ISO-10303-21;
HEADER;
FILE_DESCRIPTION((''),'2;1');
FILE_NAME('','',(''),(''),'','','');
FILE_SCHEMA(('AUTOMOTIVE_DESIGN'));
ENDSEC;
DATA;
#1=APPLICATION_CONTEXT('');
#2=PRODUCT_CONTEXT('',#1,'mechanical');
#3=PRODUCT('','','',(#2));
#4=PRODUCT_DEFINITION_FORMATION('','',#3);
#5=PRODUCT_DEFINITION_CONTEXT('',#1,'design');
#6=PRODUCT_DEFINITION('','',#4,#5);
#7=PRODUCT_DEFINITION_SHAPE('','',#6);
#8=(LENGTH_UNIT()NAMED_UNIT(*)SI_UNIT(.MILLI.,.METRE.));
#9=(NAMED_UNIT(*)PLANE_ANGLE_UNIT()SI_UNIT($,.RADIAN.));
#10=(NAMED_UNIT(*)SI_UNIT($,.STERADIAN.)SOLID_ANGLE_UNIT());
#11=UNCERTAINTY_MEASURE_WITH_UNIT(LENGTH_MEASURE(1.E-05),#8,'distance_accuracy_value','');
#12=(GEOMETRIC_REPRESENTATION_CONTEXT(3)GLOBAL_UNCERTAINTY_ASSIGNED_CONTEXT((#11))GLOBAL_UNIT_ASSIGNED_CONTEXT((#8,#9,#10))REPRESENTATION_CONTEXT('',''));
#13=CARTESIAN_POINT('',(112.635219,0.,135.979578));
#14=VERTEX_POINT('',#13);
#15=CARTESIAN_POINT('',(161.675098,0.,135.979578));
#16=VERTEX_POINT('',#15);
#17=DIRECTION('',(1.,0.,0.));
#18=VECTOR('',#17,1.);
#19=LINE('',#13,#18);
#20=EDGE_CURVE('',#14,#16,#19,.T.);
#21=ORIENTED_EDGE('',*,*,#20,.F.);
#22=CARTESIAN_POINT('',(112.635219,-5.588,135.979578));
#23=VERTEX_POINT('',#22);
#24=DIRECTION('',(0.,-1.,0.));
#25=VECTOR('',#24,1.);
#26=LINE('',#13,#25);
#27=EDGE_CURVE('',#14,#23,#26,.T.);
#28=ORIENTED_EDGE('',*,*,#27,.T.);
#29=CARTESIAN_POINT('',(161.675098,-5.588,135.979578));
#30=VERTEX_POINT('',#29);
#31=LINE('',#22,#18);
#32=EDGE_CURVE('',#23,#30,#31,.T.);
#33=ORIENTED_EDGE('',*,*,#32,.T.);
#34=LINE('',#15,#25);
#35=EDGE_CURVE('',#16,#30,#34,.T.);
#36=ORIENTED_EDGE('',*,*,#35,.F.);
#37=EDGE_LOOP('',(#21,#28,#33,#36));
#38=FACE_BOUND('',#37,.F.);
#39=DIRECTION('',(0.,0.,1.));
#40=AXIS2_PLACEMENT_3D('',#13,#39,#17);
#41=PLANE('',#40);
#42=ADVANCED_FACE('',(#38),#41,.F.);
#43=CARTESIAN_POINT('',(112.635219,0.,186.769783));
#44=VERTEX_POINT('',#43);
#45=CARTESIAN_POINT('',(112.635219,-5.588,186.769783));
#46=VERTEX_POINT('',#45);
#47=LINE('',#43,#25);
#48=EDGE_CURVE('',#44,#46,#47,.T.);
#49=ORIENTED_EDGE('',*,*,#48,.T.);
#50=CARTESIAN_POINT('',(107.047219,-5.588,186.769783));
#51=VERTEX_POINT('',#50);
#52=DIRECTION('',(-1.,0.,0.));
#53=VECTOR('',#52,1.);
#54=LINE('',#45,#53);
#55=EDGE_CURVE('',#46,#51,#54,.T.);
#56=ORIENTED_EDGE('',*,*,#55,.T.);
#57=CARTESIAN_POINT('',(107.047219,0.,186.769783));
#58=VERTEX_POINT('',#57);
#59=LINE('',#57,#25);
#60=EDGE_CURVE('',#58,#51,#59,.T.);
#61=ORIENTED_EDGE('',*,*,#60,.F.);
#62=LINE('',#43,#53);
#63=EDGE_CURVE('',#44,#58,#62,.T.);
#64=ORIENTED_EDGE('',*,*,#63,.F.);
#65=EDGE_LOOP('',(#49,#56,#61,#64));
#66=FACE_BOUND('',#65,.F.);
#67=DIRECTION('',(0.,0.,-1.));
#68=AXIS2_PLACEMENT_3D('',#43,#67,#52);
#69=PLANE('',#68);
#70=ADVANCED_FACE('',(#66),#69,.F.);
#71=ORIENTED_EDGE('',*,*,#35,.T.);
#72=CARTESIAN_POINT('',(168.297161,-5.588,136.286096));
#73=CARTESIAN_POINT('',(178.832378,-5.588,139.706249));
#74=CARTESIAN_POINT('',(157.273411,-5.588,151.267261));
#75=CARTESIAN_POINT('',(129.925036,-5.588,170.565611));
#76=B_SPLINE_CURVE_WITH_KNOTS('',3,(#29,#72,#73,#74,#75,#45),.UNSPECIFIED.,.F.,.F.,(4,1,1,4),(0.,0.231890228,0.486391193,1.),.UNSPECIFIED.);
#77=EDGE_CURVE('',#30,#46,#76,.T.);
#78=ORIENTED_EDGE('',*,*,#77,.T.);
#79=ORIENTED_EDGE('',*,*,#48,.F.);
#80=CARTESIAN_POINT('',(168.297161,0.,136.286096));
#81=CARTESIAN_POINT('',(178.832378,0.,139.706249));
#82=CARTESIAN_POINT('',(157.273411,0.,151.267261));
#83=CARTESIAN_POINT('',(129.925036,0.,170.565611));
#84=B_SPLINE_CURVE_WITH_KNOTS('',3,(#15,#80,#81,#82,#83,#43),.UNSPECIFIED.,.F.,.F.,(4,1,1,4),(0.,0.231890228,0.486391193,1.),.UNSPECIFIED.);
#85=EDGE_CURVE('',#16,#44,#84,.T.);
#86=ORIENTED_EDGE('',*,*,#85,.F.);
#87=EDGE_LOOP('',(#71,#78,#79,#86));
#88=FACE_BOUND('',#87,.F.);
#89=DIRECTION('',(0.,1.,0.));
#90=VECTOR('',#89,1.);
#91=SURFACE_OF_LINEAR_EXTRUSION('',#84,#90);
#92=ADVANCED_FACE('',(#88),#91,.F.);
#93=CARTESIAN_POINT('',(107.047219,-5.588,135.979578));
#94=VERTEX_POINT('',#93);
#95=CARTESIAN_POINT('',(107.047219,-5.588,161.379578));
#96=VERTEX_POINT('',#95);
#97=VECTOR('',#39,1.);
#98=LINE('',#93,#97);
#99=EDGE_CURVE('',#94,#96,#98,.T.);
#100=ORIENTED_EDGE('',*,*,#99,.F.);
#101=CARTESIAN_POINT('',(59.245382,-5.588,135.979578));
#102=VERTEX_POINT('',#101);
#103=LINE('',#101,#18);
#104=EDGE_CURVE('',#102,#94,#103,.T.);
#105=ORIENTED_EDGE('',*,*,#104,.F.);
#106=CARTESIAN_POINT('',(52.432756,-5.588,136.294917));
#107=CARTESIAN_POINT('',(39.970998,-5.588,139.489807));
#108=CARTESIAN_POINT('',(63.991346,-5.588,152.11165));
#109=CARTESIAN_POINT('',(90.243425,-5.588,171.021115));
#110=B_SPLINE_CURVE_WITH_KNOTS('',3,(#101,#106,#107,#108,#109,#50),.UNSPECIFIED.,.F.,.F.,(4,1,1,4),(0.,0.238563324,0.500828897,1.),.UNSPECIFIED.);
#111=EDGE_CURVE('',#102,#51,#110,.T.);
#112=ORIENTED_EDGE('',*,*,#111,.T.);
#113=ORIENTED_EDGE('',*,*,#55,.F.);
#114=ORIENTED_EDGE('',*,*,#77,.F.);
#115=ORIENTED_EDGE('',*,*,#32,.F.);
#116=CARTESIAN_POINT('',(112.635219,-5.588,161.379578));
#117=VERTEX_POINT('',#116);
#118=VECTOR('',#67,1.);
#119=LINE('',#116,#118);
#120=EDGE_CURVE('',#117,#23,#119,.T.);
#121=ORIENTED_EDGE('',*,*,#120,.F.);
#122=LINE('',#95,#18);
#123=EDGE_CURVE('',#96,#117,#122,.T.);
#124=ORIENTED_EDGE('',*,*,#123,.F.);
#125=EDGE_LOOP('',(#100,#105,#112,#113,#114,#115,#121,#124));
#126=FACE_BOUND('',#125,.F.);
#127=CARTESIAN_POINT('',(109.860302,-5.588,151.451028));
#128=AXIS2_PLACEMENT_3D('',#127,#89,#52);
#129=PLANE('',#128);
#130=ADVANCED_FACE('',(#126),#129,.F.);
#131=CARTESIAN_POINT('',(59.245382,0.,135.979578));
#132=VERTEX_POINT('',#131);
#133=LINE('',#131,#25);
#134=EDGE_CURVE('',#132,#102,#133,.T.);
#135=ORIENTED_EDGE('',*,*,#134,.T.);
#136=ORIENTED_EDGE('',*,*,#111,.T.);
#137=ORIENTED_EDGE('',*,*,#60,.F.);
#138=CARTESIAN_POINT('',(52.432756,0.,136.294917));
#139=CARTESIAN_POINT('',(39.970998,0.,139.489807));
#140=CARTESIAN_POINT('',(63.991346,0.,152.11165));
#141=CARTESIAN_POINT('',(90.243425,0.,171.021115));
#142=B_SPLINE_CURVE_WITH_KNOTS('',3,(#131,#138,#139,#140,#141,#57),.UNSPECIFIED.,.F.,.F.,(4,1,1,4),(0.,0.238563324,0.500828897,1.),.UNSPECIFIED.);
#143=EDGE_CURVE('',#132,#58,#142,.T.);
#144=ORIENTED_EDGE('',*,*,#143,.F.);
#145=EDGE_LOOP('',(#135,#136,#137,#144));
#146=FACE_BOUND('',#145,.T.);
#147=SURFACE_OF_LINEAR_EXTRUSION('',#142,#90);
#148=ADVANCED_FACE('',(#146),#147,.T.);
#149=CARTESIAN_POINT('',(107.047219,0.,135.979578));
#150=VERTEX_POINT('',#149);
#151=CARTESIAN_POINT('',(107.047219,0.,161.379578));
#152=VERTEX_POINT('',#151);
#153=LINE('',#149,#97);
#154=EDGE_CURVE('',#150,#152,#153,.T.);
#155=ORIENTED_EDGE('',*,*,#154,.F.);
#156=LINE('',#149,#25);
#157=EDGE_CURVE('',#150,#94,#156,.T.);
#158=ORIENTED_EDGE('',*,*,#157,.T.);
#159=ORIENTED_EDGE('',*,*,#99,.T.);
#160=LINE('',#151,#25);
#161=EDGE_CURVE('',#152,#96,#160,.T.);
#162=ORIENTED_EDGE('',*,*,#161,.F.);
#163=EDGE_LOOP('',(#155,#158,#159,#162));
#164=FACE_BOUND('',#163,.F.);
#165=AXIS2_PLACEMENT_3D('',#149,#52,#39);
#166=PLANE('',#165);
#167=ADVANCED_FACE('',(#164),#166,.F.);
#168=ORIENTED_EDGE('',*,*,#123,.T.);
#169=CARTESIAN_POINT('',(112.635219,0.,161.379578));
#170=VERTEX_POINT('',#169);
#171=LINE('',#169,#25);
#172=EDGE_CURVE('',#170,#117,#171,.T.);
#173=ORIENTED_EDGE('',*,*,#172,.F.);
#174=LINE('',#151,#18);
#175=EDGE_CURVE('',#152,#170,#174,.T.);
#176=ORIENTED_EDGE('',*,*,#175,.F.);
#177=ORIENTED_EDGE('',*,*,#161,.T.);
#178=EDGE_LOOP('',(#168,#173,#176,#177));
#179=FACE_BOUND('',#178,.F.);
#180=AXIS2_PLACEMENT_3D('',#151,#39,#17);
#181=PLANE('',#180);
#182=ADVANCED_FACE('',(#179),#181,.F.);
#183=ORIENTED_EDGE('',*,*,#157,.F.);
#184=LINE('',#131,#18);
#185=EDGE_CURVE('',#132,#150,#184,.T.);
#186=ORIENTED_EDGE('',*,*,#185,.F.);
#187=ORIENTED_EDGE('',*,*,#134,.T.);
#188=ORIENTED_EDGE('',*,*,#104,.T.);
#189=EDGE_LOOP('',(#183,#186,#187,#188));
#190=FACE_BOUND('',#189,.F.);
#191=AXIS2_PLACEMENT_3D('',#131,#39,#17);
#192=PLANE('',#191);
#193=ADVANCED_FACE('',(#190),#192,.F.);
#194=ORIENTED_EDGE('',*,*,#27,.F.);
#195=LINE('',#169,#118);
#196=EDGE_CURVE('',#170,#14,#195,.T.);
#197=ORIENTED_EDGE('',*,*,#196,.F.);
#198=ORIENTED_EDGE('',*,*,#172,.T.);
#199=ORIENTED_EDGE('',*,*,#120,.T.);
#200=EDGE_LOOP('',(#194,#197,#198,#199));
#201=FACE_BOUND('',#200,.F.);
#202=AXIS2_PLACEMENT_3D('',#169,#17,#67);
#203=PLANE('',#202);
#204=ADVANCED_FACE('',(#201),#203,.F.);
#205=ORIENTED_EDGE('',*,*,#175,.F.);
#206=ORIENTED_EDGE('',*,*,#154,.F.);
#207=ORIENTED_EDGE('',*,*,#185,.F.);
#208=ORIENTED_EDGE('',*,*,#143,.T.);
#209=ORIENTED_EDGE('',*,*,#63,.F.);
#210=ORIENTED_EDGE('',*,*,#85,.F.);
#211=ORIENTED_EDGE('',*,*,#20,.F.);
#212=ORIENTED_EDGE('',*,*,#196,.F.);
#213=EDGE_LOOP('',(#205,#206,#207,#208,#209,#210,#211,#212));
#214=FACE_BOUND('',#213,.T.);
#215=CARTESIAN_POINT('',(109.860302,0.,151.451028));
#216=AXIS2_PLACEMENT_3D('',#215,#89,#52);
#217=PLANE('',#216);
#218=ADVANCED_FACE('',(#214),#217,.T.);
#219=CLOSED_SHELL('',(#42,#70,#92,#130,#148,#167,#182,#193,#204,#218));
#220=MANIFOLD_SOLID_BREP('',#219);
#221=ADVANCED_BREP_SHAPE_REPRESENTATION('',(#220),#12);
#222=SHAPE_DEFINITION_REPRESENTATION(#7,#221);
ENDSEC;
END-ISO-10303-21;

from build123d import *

# Parameters (mm, degrees)
F1_DEPTH = 5.588


with BuildPart() as f1:
    # F0 (on Front) → F1 (new body)
    with BuildSketch(Plane.XZ):
        with BuildLine():
            add(Edge.make_bspline(
                [(59.2453815043, 135.979577899), (52.4327556863, 136.2949171435), (39.9709976325, 139.4898068104), (63.9913458796, 152.1116502589), (90.2434246222, 171.0211149335), (107.0472194433, 186.7697834969)],
                knots=[0, 0, 0, 0, 0.2385633235, 0.5008288966, 1, 1, 1, 1], degree=3))
            Line((59.2453815043, 135.979577899), (107.0472194433, 135.979577899))
            Line((107.0472194433, 135.979577899), (107.0472194433, 161.379577899))
            Line((107.0472194433, 161.379577899), (112.6352194433, 161.379577899))
            Line((112.6352194433, 161.379577899), (112.6352194433, 135.979577899))
            Line((112.6352194433, 135.979577899), (161.6750980084, 135.979577899))
            add(Edge.make_bspline(
                [(161.6750980084, 135.979577899), (168.2971610007, 136.2860964716), (178.8323776641, 139.7062489389), (157.2734114026, 151.2672606436), (129.9250364204, 170.5656105709), (112.6352194433, 186.7697834969)],
                knots=[0, 0, 0, 0, 0.2318902282, 0.4863911926, 1, 1, 1, 1], degree=3))
            Line((112.6352194433, 186.7697834969), (107.0472194433, 186.7697834969))
        make_face()
    extrude(amount=F1_DEPTH)


solid = f1.part
